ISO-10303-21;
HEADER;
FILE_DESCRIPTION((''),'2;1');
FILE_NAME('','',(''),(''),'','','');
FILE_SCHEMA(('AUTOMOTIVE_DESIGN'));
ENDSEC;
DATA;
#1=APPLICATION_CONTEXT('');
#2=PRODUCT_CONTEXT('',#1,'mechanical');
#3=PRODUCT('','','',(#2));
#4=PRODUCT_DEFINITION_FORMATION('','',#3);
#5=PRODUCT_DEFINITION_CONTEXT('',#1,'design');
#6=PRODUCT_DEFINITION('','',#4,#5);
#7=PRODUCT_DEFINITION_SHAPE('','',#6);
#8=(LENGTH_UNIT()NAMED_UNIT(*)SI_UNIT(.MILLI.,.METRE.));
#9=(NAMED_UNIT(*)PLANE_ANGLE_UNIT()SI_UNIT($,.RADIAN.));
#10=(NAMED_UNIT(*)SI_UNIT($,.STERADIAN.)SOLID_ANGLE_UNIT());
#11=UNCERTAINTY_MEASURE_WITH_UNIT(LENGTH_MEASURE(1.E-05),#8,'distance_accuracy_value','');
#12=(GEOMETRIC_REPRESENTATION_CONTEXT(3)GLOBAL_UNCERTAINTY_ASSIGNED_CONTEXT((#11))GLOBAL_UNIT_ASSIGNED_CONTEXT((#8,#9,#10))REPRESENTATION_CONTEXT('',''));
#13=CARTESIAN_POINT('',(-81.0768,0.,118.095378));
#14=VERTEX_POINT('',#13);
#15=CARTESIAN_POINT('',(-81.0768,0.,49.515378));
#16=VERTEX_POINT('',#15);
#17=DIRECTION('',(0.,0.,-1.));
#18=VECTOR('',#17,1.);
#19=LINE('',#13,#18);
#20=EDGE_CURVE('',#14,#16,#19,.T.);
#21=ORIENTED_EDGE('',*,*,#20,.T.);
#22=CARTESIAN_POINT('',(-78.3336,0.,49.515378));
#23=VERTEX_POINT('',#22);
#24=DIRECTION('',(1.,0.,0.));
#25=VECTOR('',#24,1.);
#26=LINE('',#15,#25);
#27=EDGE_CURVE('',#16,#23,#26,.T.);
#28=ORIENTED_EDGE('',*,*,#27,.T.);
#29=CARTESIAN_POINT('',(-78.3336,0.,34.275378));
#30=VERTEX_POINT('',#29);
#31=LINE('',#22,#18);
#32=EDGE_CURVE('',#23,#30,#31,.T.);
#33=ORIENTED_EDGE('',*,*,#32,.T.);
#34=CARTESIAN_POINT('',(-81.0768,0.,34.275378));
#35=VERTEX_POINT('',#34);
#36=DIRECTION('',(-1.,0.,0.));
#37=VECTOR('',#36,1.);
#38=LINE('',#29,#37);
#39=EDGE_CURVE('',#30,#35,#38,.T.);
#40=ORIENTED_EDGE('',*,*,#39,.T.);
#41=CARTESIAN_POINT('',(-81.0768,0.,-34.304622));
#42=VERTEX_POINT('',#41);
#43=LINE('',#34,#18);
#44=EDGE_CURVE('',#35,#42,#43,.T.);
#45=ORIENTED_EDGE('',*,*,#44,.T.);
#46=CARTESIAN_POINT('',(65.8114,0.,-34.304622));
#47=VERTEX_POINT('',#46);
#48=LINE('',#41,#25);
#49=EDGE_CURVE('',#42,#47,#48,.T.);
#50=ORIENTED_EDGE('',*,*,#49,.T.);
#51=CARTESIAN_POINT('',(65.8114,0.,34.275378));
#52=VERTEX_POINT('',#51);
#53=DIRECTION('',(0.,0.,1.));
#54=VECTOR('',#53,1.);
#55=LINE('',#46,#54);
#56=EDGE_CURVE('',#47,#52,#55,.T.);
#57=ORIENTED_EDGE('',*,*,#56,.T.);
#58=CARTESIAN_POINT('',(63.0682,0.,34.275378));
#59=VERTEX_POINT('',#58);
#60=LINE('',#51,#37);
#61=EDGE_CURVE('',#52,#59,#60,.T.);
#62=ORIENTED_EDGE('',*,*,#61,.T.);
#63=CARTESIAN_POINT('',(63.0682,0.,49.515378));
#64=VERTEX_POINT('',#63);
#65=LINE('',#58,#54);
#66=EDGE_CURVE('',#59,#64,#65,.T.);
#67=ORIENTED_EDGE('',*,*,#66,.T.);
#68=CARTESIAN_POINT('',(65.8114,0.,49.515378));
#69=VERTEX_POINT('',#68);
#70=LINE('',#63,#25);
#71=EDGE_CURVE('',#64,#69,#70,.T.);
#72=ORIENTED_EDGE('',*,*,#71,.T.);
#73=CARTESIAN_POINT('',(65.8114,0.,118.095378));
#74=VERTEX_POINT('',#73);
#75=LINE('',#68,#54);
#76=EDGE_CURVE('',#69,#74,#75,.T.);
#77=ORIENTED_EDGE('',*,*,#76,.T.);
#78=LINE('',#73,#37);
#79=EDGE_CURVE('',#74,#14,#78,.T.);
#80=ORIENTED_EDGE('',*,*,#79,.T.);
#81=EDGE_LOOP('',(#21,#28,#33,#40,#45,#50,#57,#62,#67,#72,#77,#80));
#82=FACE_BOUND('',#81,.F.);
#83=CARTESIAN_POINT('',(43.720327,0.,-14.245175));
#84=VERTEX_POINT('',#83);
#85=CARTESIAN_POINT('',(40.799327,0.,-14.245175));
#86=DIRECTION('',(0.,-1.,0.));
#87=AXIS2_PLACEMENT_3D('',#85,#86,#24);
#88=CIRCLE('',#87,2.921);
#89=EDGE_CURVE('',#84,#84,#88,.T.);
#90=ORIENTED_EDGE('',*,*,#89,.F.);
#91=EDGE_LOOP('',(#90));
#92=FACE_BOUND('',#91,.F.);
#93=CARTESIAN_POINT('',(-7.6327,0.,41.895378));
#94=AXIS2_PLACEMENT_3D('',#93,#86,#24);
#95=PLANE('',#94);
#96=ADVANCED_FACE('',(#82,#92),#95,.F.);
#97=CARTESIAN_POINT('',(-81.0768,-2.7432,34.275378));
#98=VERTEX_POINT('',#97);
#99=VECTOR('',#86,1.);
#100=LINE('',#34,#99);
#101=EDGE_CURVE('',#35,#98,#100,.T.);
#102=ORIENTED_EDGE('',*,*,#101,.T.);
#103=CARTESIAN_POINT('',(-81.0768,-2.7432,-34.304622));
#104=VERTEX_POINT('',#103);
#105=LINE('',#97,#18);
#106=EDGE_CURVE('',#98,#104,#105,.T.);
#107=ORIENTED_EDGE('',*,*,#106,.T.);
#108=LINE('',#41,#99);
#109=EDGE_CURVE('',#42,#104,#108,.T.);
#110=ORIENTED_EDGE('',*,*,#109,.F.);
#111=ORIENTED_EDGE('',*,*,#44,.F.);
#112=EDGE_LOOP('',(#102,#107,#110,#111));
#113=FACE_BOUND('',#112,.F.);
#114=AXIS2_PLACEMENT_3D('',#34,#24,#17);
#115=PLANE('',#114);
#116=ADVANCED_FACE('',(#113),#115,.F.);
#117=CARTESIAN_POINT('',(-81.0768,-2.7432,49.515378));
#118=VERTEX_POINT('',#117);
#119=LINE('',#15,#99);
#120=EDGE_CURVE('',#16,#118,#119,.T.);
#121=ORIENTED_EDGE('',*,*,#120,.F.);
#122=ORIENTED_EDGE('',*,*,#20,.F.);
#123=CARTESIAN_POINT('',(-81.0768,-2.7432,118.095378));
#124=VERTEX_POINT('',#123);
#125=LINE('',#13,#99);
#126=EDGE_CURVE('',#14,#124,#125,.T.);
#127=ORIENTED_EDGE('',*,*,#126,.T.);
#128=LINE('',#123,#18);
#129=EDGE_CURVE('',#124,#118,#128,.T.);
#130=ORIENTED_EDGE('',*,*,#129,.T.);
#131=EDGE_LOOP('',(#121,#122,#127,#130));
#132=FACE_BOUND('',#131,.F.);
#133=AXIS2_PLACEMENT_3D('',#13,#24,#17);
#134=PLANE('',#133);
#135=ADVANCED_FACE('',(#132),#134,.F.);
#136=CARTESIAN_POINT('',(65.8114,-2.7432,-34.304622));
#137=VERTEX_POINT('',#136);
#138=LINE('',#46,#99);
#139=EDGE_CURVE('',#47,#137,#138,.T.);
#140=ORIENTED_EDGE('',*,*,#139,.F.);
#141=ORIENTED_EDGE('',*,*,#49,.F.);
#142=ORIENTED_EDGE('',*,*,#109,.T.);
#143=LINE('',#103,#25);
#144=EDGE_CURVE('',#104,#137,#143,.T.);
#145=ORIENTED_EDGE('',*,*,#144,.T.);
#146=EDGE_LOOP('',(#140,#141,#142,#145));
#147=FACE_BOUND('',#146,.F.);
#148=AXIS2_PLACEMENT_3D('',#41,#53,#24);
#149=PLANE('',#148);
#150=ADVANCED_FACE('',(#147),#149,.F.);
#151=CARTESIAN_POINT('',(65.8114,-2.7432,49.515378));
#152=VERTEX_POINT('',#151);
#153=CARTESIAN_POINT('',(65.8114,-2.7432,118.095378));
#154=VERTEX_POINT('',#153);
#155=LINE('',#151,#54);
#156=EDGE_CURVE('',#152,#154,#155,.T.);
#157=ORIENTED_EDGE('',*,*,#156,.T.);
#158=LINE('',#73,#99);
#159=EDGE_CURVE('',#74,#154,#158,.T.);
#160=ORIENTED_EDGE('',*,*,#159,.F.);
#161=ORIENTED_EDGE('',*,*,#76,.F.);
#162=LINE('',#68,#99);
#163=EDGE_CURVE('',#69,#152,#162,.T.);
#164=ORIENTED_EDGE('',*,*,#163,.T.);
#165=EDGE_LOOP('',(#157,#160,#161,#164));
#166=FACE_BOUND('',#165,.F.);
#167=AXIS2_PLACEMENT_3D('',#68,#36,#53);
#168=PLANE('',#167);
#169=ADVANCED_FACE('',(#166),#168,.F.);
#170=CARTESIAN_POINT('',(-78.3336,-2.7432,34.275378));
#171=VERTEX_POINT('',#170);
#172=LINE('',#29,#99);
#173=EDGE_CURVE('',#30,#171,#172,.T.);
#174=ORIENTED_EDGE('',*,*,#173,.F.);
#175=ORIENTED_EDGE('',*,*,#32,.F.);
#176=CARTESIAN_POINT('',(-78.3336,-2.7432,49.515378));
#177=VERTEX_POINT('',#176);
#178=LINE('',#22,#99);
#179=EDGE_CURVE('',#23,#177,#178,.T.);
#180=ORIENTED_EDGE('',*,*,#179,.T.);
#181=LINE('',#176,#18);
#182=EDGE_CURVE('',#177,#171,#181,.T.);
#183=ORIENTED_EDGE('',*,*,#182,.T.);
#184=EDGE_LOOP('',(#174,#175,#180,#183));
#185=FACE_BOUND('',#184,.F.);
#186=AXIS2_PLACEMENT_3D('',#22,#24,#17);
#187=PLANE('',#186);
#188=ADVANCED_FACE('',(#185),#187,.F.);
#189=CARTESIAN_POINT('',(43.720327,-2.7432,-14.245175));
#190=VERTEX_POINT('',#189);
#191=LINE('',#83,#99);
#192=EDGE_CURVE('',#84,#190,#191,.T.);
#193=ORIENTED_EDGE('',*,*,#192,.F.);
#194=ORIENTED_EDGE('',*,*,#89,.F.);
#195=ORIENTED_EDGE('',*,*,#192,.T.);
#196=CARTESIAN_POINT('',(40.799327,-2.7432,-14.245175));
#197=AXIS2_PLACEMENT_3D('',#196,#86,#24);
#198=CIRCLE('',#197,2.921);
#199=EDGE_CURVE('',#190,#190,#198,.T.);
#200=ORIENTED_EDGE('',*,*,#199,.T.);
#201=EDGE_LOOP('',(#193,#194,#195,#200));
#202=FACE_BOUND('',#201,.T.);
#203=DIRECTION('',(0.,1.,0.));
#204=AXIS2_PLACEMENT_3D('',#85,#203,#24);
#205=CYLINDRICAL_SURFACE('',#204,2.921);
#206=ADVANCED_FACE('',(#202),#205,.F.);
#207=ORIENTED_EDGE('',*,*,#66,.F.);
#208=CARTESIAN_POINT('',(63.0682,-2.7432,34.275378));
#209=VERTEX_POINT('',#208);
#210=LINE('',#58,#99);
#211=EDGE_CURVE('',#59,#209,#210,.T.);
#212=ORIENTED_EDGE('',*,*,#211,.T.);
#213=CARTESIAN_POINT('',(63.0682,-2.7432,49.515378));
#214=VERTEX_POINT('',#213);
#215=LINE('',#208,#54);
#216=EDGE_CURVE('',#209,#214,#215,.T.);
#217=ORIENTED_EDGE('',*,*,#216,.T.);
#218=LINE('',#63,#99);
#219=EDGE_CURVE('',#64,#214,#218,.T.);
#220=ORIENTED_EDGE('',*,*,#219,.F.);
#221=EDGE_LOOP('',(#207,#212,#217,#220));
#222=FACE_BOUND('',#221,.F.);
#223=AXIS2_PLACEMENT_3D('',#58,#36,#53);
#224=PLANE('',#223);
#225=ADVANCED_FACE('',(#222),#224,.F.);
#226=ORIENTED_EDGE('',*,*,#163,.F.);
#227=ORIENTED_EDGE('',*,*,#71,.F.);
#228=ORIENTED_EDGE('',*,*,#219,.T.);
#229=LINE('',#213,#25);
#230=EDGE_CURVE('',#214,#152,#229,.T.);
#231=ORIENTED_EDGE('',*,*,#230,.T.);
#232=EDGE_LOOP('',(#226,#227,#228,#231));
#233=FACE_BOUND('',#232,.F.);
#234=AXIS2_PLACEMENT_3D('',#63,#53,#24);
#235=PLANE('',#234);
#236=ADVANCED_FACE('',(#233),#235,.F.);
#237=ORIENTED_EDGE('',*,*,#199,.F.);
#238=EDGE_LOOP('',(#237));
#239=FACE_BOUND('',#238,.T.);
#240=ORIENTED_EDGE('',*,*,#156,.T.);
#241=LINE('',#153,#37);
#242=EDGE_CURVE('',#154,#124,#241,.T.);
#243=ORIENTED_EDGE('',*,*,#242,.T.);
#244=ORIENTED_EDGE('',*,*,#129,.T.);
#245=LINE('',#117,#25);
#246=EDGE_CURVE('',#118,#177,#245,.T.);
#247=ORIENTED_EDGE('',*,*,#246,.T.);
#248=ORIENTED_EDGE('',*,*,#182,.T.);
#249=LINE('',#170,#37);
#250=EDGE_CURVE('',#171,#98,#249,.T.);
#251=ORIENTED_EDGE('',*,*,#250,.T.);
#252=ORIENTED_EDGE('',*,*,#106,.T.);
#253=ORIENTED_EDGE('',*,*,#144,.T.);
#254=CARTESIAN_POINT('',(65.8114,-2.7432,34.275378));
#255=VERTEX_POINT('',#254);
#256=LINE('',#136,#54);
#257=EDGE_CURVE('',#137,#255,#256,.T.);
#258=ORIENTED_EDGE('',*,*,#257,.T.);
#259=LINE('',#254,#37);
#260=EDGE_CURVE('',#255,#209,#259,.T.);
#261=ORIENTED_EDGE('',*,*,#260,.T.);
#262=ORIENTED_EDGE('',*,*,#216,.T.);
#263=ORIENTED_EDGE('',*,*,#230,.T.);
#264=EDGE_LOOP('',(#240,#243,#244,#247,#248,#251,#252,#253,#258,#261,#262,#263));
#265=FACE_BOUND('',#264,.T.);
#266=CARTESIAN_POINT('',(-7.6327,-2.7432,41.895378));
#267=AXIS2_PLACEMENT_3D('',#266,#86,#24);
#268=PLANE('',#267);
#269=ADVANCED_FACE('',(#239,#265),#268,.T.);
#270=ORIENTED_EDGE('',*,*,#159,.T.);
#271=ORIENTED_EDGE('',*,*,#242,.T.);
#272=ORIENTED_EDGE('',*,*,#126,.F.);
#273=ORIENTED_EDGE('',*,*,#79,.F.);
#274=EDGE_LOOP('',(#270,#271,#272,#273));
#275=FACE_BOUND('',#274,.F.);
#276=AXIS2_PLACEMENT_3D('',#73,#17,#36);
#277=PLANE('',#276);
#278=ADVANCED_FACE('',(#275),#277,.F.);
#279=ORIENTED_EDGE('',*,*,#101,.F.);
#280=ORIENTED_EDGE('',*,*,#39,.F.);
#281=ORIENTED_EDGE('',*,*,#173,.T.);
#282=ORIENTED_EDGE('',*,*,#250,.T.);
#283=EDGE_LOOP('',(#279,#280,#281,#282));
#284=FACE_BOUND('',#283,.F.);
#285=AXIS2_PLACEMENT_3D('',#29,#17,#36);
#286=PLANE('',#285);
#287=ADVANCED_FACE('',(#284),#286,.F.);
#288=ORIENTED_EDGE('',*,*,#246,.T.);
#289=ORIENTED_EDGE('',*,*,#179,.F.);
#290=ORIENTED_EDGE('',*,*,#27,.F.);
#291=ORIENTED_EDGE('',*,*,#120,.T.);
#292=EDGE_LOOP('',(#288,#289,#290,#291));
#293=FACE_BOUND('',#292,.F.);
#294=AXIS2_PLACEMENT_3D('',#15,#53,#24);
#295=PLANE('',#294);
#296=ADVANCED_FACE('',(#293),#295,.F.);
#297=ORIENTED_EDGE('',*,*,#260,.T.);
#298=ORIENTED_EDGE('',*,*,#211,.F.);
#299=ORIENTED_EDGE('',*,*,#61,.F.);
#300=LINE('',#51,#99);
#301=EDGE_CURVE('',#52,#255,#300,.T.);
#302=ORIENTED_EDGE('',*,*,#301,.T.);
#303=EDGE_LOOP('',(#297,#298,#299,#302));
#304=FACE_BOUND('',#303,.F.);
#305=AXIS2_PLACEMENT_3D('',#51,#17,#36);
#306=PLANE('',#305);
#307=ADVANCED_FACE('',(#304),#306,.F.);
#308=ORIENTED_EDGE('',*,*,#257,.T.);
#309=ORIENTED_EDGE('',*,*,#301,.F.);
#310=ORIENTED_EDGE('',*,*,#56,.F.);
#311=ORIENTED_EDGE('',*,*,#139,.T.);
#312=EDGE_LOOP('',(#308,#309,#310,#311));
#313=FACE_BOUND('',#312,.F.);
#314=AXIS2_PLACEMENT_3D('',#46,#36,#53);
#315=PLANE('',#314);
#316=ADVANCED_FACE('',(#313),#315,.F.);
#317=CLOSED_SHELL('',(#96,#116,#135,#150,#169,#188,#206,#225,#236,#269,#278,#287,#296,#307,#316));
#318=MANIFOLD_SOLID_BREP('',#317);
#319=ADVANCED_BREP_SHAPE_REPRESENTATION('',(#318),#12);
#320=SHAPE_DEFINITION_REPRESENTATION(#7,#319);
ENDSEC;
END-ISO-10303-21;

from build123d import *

# Parameters (mm, degrees)
F0_R     = 2.921
F1_DEPTH = 2.7432


# Not quite as in the source:
# - a feature names something its author has since deleted; it is built from what else it names


with BuildPart() as f1:
    # F0 (on Front) → F1 (new body)
    with BuildSketch(Plane.XZ):
        Polygon((-15.24, 118.095377792), (-81.0768, 118.095377792), (-81.0768, 49.515377792), (-78.3336, 49.515377792), (-78.3336, 34.275377792), (-81.0768, 34.275377792), (-81.0768, -34.304622208), (-15.24, -34.304622208), (0, -34.304622208), (65.8114, -34.304622208), (65.8114, 34.275377792), (63.0682, 34.275377792), (63.0682, 49.515377792), (65.8114, 49.515377792), (65.8114, 118.095377792), (0, 118.095377792), align=None)
        with Locations((40.7993271947, -14.2451748252)):
            Circle(F0_R, mode=Mode.SUBTRACT)
    extrude(amount=F1_DEPTH)


solid = f1.part
